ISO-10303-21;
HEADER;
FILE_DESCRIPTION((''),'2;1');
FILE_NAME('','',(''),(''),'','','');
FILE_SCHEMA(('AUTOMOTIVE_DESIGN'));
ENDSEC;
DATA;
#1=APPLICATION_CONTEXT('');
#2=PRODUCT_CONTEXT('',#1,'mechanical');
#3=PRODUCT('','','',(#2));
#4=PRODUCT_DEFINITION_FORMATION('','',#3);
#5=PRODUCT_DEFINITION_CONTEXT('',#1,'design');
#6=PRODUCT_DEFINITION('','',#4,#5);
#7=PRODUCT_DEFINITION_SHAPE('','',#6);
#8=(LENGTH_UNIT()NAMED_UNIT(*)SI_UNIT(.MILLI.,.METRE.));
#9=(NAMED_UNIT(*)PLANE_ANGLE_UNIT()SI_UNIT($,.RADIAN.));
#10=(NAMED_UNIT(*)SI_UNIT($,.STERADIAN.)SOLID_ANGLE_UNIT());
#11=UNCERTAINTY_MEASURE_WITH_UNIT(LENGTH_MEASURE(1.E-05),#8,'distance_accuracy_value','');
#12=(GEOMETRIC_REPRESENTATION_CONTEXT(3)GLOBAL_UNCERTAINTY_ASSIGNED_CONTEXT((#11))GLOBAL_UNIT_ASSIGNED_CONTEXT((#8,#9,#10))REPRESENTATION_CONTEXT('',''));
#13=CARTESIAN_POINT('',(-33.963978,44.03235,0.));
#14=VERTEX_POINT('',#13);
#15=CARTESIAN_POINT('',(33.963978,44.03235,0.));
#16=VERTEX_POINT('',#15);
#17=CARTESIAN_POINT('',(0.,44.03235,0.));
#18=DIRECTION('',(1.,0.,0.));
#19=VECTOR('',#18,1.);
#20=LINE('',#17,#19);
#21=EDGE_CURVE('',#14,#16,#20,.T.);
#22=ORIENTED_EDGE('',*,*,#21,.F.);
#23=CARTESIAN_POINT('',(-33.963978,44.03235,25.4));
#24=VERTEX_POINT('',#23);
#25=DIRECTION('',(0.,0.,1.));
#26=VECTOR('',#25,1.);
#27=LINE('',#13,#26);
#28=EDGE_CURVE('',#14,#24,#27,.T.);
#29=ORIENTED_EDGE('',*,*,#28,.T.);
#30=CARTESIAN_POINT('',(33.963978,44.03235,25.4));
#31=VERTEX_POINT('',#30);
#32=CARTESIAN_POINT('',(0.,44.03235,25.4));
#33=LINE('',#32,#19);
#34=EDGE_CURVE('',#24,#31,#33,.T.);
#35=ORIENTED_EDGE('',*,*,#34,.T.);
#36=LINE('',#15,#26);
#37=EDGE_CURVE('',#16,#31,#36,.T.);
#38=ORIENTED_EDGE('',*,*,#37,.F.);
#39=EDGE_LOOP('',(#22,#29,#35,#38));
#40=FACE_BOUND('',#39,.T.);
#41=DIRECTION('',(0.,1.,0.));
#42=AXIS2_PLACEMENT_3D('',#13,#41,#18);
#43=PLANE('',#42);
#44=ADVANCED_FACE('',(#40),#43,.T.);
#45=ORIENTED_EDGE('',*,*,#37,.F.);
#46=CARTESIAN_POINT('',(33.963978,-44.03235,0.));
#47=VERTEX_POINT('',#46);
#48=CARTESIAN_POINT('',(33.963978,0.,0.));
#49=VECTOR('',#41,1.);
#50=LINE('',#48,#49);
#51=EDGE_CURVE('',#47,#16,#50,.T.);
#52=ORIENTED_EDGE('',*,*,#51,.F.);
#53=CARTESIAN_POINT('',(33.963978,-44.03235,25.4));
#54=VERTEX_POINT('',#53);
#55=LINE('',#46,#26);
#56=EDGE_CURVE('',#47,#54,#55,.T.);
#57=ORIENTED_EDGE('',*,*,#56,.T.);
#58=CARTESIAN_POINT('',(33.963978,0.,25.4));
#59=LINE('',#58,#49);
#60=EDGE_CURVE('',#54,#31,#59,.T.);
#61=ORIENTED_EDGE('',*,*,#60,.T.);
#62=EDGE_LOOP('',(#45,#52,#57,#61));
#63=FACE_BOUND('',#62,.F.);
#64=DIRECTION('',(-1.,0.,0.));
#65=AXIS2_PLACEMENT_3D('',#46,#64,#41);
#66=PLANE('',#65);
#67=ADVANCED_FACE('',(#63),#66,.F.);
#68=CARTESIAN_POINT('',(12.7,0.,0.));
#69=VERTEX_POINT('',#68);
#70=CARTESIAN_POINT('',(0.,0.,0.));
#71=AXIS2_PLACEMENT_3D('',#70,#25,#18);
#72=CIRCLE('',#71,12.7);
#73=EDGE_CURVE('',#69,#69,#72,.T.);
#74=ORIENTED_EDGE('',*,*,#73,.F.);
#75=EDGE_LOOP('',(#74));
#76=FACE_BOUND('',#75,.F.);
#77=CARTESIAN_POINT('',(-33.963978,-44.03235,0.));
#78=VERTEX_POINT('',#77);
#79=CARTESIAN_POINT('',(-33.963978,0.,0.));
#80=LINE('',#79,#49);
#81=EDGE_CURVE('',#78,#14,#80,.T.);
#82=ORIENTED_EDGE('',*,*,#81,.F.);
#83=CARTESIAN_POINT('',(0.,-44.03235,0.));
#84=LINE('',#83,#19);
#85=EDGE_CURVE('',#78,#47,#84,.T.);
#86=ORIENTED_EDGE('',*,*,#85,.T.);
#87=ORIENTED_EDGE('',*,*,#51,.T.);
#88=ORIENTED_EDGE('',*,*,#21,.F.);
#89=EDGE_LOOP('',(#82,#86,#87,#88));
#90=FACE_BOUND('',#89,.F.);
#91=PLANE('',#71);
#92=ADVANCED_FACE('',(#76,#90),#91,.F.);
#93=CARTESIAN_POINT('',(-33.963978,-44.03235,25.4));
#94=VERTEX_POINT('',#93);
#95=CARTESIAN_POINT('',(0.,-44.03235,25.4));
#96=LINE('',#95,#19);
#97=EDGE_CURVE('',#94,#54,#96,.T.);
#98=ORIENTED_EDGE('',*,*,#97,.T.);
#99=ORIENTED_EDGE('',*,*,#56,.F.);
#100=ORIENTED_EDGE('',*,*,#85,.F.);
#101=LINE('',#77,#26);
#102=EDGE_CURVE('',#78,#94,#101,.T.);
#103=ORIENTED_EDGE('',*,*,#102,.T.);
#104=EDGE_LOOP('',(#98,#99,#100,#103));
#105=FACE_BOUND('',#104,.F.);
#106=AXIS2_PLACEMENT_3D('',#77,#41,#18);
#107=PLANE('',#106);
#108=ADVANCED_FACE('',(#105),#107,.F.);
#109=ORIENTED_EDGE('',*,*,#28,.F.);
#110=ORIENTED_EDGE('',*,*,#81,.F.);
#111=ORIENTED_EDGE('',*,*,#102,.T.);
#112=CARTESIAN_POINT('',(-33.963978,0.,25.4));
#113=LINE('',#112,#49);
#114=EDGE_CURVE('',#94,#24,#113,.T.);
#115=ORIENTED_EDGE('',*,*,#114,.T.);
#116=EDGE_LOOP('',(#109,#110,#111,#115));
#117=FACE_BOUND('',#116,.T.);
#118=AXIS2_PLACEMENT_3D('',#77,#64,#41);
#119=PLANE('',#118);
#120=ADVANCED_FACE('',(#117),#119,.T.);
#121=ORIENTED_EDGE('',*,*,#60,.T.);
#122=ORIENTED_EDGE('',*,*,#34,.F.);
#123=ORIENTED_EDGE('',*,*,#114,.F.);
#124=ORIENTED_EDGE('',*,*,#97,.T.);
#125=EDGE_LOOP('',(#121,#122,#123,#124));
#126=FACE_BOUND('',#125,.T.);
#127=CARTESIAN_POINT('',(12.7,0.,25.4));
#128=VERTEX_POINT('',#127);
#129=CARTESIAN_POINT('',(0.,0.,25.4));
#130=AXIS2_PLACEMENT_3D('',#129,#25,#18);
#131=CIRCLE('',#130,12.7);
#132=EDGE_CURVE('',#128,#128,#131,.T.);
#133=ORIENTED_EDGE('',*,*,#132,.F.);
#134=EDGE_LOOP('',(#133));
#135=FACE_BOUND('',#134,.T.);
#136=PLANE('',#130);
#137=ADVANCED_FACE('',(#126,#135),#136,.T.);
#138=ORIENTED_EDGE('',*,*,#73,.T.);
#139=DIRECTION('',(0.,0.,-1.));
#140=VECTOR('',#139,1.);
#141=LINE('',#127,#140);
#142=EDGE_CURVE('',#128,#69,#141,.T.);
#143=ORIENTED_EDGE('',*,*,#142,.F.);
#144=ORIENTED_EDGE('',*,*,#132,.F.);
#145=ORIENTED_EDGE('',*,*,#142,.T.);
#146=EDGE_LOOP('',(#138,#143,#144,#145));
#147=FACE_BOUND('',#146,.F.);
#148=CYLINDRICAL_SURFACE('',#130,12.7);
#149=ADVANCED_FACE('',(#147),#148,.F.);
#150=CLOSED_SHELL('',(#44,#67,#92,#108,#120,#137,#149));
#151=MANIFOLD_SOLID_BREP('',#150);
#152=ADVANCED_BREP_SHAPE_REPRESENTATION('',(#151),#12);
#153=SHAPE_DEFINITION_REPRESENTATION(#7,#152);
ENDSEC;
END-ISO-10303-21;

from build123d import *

# Parameters (mm, degrees)
F0_W     = 67.9279565811
F0_H     = 88.0647003651
F1_DEPTH = 25.4
F2_R     = 12.7
F3_DEPTH = 25.4


# Not quite as in the source:
# - a feature of the source that left no trace in its solid (it failed there, or was rolled back) is left out


with BuildPart() as f1:
    # F0 (on Top) → F1 (new body)
    with BuildSketch(Plane.XY):
        Rectangle(F0_W, F0_H)
    extrude(amount=F1_DEPTH)

    # F2 (on face) → F3 (cut)
    with BuildSketch(Plane.XY.offset(25.4)):
        Circle(F2_R)
    extrude(amount=-F3_DEPTH, mode=Mode.SUBTRACT)


solid = f1.part
